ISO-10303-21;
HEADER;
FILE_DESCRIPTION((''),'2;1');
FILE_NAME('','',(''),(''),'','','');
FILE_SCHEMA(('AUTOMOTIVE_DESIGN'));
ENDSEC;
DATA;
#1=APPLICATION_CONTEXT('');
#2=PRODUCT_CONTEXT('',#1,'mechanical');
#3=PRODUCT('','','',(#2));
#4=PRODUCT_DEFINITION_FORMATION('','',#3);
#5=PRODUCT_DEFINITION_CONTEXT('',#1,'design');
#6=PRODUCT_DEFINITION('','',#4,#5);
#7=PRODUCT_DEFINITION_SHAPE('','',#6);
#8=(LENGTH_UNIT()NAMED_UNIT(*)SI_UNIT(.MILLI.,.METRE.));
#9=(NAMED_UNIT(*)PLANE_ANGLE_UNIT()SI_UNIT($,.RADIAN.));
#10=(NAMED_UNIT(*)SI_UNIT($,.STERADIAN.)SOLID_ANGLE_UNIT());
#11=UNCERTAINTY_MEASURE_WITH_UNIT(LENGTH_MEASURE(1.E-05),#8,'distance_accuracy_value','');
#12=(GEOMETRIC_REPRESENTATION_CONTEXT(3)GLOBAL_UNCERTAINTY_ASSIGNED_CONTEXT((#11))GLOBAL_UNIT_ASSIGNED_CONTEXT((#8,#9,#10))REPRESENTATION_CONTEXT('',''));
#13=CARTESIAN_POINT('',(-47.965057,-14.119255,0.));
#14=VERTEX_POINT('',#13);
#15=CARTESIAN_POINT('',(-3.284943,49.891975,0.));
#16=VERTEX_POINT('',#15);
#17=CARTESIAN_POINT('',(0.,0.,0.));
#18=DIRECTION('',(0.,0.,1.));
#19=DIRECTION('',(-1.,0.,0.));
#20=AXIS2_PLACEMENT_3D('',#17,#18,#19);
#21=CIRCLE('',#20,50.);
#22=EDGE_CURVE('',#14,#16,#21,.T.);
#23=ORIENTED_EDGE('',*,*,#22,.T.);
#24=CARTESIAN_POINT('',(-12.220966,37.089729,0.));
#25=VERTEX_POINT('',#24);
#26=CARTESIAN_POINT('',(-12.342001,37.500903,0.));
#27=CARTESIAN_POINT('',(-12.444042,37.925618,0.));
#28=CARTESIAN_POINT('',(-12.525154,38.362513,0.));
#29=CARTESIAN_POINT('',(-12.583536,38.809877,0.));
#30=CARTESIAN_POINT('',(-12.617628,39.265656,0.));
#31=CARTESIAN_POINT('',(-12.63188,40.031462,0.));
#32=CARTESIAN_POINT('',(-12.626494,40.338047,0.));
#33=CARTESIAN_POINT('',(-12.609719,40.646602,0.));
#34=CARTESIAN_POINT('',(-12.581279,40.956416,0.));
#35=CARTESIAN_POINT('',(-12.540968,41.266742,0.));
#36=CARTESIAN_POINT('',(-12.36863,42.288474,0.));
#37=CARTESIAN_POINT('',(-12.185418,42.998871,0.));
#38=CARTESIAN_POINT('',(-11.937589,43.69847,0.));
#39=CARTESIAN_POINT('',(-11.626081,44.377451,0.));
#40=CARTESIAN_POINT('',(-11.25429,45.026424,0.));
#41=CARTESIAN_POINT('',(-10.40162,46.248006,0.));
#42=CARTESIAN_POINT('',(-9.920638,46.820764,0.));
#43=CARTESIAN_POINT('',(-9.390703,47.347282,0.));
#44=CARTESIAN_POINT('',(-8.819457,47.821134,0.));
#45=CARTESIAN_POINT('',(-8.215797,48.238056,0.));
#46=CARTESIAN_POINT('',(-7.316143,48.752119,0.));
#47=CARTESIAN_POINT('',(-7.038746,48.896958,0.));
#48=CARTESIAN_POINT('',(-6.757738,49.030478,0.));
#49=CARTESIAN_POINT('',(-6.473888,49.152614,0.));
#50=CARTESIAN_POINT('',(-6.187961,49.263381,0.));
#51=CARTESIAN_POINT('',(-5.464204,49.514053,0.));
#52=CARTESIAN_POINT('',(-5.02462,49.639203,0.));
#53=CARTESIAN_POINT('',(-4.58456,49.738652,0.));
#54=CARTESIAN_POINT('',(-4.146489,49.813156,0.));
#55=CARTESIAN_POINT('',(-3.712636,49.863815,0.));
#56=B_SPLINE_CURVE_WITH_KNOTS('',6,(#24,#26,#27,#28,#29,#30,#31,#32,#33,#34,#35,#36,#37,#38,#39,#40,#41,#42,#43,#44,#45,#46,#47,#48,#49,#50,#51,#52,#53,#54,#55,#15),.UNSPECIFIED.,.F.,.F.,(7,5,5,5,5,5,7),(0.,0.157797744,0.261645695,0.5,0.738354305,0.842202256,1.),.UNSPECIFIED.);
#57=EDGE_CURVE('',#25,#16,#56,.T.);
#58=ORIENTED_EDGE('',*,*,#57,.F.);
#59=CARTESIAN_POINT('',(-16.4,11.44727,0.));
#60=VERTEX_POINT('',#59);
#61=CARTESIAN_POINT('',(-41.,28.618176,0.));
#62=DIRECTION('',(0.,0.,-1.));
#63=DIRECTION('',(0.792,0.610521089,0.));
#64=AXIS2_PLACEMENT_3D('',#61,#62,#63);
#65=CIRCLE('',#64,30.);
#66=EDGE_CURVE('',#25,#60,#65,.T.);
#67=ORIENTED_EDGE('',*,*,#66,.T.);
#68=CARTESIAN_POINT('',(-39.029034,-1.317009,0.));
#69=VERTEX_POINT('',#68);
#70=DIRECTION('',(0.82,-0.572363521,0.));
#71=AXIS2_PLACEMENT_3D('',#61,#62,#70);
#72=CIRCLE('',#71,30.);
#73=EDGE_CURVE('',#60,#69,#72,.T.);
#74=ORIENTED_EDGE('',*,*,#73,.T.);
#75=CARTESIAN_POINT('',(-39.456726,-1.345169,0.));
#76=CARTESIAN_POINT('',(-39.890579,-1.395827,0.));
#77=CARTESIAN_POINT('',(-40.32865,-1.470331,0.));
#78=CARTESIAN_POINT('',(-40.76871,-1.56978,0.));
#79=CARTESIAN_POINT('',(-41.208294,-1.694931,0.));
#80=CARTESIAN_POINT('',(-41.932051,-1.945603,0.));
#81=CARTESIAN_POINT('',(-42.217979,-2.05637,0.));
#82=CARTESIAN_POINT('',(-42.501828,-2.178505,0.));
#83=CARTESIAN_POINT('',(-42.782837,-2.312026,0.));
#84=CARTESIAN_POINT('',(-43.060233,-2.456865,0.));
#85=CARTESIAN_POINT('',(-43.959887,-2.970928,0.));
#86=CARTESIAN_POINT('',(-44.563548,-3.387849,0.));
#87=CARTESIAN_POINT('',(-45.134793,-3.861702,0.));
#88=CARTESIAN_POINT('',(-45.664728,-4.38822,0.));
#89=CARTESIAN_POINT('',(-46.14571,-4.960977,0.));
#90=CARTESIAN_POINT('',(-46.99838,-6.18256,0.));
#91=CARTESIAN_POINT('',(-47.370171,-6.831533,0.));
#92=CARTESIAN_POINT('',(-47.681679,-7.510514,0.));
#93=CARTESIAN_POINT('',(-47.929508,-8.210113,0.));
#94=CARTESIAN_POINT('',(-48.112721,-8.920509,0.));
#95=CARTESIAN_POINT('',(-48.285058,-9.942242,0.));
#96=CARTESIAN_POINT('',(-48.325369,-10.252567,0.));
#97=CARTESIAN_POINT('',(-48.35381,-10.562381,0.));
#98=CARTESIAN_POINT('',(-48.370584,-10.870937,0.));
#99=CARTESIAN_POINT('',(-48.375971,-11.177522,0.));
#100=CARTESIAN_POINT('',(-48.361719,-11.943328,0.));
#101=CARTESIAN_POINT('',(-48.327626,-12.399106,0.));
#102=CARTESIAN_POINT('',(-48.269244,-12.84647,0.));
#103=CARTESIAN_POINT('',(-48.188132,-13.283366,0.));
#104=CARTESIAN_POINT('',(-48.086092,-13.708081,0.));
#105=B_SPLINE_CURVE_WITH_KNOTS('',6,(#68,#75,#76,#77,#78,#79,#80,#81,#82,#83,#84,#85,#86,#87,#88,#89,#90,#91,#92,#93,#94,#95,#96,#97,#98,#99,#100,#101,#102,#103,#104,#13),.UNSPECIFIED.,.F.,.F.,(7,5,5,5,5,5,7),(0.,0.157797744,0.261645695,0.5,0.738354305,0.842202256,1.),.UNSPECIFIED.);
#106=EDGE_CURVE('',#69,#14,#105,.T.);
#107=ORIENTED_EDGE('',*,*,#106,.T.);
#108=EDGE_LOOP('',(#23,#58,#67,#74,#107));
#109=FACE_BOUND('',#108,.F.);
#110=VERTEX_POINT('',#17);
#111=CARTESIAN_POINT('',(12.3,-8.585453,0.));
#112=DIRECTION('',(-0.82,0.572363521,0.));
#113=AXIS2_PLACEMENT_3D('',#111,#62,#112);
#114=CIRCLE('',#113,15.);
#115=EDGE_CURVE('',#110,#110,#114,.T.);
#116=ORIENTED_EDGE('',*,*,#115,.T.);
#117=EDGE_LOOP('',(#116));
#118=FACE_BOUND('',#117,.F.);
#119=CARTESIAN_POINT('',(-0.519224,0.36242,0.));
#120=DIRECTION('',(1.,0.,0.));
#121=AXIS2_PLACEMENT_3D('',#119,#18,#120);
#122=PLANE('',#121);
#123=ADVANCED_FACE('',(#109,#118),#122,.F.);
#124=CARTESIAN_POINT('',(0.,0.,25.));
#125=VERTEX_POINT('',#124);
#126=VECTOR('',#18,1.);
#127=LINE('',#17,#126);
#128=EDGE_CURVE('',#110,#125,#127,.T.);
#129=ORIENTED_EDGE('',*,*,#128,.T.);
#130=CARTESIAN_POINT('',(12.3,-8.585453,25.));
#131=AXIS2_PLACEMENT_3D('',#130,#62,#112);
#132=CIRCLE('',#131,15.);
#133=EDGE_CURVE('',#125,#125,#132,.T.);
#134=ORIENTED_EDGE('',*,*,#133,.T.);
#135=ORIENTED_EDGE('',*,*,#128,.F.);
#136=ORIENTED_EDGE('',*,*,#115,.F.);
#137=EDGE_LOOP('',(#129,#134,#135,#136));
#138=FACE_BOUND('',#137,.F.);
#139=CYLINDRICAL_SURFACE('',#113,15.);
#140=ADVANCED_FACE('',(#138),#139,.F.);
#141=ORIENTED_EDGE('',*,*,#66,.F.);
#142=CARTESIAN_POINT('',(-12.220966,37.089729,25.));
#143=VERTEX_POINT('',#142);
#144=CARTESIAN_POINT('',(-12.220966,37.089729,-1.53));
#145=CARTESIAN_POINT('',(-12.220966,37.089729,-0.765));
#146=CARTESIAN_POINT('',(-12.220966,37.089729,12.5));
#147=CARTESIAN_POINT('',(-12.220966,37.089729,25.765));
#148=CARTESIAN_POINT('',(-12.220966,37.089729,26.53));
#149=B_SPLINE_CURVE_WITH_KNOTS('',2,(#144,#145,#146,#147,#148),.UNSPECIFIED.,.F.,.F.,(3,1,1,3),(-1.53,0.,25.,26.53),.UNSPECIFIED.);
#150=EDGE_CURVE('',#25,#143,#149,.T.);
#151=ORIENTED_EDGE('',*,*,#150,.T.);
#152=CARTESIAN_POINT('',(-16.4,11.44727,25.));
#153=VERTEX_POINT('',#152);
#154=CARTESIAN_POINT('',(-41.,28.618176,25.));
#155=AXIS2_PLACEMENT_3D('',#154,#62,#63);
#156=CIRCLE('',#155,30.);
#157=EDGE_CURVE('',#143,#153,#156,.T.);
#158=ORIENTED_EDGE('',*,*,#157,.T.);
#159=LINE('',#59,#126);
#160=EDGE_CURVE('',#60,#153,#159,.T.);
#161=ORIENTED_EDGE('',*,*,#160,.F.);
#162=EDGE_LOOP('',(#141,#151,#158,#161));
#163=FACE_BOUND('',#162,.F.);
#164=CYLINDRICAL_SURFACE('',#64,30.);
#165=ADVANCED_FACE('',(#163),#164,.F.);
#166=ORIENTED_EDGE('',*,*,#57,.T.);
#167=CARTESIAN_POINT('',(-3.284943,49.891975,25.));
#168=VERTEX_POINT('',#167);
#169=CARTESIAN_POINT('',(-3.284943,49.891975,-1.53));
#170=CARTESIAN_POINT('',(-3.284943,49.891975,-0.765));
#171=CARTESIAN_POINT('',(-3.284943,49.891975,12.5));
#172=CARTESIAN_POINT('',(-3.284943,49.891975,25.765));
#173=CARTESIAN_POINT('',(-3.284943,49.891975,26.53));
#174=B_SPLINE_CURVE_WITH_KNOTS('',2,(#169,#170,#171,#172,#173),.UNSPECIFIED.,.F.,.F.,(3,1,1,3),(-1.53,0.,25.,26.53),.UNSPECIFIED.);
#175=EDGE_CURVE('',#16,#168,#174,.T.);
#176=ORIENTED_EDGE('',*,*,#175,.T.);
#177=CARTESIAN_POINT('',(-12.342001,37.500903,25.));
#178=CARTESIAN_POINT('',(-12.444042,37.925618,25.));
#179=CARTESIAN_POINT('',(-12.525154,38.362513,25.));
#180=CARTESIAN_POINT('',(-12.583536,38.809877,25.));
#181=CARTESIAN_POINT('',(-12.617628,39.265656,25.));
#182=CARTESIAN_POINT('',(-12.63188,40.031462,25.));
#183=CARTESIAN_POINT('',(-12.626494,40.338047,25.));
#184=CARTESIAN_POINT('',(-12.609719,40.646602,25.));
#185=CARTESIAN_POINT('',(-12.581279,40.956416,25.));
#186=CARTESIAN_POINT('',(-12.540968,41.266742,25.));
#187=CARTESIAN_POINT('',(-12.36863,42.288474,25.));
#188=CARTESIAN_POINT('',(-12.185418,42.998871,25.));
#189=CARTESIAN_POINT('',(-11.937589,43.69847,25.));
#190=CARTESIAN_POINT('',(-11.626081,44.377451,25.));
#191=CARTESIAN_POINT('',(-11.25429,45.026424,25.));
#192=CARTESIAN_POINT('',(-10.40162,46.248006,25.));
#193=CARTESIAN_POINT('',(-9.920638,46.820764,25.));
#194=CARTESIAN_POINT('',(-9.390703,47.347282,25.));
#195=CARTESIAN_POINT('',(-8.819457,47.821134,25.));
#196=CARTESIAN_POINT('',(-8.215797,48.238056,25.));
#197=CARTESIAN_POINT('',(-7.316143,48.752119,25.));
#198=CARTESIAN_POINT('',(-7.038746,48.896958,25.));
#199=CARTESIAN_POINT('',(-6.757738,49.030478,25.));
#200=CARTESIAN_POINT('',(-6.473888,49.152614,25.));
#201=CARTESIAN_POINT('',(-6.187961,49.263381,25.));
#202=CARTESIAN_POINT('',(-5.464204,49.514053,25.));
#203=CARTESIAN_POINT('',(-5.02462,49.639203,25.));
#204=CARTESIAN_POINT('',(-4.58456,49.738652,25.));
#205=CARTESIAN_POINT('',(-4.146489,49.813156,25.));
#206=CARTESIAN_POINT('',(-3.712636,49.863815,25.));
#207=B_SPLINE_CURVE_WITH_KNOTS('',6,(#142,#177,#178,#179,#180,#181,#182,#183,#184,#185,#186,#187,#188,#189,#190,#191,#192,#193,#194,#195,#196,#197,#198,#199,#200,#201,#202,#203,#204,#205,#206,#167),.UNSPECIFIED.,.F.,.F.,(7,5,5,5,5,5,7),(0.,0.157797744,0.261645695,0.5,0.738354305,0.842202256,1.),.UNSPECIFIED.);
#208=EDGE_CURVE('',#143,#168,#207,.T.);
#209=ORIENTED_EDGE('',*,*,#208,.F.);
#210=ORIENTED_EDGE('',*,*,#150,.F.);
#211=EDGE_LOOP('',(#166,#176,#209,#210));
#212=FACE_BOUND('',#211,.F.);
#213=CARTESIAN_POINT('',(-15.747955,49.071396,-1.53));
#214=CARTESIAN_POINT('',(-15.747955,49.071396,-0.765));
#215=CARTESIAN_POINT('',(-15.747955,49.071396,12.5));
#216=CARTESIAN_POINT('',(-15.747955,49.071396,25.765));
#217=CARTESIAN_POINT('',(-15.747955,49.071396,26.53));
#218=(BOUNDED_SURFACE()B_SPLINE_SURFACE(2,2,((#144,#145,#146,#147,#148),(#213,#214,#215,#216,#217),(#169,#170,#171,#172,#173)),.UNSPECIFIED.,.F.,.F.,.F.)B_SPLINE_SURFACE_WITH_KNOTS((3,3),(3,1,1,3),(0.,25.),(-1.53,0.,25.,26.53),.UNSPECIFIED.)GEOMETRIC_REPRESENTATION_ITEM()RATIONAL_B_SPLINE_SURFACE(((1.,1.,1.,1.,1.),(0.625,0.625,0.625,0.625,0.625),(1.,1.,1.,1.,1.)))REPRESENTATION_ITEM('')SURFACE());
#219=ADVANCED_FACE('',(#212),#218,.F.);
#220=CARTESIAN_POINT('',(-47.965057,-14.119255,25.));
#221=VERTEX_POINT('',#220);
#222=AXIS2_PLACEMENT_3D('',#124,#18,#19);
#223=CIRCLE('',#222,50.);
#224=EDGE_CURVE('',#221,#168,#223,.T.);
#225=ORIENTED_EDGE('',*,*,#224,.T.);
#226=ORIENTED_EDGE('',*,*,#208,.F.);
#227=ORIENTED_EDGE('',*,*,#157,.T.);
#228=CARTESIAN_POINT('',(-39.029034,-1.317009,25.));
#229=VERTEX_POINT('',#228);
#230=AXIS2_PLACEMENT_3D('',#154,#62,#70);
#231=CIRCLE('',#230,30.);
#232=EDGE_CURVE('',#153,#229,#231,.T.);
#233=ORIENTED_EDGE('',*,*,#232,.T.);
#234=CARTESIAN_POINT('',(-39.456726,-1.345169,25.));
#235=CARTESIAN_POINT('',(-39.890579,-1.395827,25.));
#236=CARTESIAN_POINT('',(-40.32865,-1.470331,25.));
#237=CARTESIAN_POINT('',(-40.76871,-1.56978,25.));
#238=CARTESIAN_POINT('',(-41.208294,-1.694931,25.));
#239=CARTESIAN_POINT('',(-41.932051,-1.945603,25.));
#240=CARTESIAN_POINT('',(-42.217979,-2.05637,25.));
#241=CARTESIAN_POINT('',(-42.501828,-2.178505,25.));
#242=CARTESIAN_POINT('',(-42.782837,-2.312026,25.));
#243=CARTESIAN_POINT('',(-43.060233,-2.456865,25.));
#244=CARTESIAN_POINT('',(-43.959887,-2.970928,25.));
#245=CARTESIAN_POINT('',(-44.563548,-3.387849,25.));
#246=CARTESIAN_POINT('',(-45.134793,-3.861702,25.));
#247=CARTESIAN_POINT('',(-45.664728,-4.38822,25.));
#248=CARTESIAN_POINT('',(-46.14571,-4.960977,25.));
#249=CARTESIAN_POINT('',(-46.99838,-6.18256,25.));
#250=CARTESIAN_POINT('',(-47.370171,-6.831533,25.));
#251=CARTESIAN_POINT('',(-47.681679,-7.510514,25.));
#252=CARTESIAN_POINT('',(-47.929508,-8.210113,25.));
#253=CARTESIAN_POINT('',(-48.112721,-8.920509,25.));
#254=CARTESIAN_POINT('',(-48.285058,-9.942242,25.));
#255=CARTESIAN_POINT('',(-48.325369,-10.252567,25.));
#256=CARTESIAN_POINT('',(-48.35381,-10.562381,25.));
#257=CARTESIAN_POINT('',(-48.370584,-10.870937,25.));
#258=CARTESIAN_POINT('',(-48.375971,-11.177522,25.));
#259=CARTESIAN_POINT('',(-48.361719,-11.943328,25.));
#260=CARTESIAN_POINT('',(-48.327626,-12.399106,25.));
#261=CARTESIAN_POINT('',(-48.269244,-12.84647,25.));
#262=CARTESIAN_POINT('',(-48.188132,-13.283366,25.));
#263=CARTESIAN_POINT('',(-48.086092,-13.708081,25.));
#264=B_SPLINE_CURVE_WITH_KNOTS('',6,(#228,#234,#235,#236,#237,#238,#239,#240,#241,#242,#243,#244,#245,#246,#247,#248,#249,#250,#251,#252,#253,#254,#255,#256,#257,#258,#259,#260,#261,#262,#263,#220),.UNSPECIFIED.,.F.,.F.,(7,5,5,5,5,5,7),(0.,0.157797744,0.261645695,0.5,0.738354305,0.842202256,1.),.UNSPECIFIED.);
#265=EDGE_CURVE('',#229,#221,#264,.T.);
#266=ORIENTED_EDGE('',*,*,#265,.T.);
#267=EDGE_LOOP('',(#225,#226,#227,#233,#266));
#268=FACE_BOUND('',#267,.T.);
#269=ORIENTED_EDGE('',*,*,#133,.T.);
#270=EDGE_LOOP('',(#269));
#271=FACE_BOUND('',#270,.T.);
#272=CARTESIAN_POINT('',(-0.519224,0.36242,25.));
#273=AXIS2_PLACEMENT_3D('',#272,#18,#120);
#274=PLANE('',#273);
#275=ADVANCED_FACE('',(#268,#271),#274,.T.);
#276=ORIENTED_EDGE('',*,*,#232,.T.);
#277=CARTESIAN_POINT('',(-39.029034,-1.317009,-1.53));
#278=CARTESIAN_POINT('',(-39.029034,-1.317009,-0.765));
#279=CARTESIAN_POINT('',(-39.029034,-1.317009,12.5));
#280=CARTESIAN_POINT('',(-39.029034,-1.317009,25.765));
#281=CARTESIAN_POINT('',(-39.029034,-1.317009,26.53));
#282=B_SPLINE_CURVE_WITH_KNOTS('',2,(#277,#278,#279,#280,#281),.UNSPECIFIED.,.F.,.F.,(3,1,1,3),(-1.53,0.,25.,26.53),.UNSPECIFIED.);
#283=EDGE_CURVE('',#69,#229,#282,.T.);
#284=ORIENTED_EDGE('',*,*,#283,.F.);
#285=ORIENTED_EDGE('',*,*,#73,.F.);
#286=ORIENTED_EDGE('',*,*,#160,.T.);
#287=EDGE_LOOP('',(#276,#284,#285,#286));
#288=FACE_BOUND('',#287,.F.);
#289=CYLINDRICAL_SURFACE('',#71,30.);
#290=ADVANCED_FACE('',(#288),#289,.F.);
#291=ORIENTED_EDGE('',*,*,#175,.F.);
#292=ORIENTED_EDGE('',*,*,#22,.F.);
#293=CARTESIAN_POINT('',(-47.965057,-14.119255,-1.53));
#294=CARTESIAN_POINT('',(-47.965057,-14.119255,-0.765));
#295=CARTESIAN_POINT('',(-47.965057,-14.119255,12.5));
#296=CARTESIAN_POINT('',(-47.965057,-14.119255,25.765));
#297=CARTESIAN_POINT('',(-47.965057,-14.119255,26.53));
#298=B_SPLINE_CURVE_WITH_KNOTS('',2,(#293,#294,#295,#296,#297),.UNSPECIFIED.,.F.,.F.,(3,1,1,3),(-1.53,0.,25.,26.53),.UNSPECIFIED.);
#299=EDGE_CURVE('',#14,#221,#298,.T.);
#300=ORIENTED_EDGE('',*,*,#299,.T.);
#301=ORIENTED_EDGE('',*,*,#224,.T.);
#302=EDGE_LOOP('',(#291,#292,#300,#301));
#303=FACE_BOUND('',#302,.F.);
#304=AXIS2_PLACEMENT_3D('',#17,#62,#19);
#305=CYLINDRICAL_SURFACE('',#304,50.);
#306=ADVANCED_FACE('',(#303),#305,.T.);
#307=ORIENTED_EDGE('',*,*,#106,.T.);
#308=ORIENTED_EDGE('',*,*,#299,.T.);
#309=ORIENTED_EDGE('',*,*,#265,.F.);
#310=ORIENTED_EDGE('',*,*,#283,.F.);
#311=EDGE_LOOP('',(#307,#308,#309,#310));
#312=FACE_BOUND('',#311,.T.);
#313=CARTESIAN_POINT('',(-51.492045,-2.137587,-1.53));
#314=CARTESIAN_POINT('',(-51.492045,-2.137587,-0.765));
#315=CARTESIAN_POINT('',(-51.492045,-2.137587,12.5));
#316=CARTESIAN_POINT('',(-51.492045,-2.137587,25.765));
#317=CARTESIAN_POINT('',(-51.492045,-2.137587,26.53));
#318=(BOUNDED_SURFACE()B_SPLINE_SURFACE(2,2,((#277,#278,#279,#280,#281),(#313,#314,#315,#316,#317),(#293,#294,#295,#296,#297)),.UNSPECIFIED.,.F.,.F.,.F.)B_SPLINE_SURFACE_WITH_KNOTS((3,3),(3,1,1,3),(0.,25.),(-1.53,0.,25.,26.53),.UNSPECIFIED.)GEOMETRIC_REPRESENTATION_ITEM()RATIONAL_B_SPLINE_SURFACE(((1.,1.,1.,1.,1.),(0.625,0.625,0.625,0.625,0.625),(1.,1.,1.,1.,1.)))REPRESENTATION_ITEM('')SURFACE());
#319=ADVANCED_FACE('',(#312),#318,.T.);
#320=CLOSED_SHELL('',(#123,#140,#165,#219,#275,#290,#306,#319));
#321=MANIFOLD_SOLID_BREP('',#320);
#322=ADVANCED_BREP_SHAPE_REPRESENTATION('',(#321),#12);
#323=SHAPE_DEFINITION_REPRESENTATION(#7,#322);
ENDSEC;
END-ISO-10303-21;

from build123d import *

# Parameters (mm, degrees)
F1_DEPTH = 25
F2_R     = 10


with BuildPart() as f1:
    # F0 (on Top) → F1 (new body)
    with BuildSketch(Plane.XY):
        with BuildLine():
            ThreePointArc((-16.4, 11.447270417), (-31.325290702, 0.2209930836), (-50, 0))
            ThreePointArc((-50, 0), (41, -28.6181760425), (-17.24, 46.9338087097))
            ThreePointArc((-17.24, 46.9338087097), (-11.0084011763, 29.3281056165), (-16.4, 11.447270417))
        make_face()
        with BuildLine():
            ThreePointArc((27.3, -8.5854528128), (7.8, -22.894540834), (0, 0))
            ThreePointArc((0, 0), (16.8, 5.7236352085), (27.3, -8.5854528128))
        make_face(mode=Mode.SUBTRACT)
    extrude(amount=F1_DEPTH)

    # F2
    f2_edges = [f1.edges().sort_by_distance(p)[0] for p in [
        (-50, 0, 12.5),
        (-17.24, 46.933809, 12.5),
    ]]
    fillet(f2_edges, radius=F2_R)


solid = f1.part
